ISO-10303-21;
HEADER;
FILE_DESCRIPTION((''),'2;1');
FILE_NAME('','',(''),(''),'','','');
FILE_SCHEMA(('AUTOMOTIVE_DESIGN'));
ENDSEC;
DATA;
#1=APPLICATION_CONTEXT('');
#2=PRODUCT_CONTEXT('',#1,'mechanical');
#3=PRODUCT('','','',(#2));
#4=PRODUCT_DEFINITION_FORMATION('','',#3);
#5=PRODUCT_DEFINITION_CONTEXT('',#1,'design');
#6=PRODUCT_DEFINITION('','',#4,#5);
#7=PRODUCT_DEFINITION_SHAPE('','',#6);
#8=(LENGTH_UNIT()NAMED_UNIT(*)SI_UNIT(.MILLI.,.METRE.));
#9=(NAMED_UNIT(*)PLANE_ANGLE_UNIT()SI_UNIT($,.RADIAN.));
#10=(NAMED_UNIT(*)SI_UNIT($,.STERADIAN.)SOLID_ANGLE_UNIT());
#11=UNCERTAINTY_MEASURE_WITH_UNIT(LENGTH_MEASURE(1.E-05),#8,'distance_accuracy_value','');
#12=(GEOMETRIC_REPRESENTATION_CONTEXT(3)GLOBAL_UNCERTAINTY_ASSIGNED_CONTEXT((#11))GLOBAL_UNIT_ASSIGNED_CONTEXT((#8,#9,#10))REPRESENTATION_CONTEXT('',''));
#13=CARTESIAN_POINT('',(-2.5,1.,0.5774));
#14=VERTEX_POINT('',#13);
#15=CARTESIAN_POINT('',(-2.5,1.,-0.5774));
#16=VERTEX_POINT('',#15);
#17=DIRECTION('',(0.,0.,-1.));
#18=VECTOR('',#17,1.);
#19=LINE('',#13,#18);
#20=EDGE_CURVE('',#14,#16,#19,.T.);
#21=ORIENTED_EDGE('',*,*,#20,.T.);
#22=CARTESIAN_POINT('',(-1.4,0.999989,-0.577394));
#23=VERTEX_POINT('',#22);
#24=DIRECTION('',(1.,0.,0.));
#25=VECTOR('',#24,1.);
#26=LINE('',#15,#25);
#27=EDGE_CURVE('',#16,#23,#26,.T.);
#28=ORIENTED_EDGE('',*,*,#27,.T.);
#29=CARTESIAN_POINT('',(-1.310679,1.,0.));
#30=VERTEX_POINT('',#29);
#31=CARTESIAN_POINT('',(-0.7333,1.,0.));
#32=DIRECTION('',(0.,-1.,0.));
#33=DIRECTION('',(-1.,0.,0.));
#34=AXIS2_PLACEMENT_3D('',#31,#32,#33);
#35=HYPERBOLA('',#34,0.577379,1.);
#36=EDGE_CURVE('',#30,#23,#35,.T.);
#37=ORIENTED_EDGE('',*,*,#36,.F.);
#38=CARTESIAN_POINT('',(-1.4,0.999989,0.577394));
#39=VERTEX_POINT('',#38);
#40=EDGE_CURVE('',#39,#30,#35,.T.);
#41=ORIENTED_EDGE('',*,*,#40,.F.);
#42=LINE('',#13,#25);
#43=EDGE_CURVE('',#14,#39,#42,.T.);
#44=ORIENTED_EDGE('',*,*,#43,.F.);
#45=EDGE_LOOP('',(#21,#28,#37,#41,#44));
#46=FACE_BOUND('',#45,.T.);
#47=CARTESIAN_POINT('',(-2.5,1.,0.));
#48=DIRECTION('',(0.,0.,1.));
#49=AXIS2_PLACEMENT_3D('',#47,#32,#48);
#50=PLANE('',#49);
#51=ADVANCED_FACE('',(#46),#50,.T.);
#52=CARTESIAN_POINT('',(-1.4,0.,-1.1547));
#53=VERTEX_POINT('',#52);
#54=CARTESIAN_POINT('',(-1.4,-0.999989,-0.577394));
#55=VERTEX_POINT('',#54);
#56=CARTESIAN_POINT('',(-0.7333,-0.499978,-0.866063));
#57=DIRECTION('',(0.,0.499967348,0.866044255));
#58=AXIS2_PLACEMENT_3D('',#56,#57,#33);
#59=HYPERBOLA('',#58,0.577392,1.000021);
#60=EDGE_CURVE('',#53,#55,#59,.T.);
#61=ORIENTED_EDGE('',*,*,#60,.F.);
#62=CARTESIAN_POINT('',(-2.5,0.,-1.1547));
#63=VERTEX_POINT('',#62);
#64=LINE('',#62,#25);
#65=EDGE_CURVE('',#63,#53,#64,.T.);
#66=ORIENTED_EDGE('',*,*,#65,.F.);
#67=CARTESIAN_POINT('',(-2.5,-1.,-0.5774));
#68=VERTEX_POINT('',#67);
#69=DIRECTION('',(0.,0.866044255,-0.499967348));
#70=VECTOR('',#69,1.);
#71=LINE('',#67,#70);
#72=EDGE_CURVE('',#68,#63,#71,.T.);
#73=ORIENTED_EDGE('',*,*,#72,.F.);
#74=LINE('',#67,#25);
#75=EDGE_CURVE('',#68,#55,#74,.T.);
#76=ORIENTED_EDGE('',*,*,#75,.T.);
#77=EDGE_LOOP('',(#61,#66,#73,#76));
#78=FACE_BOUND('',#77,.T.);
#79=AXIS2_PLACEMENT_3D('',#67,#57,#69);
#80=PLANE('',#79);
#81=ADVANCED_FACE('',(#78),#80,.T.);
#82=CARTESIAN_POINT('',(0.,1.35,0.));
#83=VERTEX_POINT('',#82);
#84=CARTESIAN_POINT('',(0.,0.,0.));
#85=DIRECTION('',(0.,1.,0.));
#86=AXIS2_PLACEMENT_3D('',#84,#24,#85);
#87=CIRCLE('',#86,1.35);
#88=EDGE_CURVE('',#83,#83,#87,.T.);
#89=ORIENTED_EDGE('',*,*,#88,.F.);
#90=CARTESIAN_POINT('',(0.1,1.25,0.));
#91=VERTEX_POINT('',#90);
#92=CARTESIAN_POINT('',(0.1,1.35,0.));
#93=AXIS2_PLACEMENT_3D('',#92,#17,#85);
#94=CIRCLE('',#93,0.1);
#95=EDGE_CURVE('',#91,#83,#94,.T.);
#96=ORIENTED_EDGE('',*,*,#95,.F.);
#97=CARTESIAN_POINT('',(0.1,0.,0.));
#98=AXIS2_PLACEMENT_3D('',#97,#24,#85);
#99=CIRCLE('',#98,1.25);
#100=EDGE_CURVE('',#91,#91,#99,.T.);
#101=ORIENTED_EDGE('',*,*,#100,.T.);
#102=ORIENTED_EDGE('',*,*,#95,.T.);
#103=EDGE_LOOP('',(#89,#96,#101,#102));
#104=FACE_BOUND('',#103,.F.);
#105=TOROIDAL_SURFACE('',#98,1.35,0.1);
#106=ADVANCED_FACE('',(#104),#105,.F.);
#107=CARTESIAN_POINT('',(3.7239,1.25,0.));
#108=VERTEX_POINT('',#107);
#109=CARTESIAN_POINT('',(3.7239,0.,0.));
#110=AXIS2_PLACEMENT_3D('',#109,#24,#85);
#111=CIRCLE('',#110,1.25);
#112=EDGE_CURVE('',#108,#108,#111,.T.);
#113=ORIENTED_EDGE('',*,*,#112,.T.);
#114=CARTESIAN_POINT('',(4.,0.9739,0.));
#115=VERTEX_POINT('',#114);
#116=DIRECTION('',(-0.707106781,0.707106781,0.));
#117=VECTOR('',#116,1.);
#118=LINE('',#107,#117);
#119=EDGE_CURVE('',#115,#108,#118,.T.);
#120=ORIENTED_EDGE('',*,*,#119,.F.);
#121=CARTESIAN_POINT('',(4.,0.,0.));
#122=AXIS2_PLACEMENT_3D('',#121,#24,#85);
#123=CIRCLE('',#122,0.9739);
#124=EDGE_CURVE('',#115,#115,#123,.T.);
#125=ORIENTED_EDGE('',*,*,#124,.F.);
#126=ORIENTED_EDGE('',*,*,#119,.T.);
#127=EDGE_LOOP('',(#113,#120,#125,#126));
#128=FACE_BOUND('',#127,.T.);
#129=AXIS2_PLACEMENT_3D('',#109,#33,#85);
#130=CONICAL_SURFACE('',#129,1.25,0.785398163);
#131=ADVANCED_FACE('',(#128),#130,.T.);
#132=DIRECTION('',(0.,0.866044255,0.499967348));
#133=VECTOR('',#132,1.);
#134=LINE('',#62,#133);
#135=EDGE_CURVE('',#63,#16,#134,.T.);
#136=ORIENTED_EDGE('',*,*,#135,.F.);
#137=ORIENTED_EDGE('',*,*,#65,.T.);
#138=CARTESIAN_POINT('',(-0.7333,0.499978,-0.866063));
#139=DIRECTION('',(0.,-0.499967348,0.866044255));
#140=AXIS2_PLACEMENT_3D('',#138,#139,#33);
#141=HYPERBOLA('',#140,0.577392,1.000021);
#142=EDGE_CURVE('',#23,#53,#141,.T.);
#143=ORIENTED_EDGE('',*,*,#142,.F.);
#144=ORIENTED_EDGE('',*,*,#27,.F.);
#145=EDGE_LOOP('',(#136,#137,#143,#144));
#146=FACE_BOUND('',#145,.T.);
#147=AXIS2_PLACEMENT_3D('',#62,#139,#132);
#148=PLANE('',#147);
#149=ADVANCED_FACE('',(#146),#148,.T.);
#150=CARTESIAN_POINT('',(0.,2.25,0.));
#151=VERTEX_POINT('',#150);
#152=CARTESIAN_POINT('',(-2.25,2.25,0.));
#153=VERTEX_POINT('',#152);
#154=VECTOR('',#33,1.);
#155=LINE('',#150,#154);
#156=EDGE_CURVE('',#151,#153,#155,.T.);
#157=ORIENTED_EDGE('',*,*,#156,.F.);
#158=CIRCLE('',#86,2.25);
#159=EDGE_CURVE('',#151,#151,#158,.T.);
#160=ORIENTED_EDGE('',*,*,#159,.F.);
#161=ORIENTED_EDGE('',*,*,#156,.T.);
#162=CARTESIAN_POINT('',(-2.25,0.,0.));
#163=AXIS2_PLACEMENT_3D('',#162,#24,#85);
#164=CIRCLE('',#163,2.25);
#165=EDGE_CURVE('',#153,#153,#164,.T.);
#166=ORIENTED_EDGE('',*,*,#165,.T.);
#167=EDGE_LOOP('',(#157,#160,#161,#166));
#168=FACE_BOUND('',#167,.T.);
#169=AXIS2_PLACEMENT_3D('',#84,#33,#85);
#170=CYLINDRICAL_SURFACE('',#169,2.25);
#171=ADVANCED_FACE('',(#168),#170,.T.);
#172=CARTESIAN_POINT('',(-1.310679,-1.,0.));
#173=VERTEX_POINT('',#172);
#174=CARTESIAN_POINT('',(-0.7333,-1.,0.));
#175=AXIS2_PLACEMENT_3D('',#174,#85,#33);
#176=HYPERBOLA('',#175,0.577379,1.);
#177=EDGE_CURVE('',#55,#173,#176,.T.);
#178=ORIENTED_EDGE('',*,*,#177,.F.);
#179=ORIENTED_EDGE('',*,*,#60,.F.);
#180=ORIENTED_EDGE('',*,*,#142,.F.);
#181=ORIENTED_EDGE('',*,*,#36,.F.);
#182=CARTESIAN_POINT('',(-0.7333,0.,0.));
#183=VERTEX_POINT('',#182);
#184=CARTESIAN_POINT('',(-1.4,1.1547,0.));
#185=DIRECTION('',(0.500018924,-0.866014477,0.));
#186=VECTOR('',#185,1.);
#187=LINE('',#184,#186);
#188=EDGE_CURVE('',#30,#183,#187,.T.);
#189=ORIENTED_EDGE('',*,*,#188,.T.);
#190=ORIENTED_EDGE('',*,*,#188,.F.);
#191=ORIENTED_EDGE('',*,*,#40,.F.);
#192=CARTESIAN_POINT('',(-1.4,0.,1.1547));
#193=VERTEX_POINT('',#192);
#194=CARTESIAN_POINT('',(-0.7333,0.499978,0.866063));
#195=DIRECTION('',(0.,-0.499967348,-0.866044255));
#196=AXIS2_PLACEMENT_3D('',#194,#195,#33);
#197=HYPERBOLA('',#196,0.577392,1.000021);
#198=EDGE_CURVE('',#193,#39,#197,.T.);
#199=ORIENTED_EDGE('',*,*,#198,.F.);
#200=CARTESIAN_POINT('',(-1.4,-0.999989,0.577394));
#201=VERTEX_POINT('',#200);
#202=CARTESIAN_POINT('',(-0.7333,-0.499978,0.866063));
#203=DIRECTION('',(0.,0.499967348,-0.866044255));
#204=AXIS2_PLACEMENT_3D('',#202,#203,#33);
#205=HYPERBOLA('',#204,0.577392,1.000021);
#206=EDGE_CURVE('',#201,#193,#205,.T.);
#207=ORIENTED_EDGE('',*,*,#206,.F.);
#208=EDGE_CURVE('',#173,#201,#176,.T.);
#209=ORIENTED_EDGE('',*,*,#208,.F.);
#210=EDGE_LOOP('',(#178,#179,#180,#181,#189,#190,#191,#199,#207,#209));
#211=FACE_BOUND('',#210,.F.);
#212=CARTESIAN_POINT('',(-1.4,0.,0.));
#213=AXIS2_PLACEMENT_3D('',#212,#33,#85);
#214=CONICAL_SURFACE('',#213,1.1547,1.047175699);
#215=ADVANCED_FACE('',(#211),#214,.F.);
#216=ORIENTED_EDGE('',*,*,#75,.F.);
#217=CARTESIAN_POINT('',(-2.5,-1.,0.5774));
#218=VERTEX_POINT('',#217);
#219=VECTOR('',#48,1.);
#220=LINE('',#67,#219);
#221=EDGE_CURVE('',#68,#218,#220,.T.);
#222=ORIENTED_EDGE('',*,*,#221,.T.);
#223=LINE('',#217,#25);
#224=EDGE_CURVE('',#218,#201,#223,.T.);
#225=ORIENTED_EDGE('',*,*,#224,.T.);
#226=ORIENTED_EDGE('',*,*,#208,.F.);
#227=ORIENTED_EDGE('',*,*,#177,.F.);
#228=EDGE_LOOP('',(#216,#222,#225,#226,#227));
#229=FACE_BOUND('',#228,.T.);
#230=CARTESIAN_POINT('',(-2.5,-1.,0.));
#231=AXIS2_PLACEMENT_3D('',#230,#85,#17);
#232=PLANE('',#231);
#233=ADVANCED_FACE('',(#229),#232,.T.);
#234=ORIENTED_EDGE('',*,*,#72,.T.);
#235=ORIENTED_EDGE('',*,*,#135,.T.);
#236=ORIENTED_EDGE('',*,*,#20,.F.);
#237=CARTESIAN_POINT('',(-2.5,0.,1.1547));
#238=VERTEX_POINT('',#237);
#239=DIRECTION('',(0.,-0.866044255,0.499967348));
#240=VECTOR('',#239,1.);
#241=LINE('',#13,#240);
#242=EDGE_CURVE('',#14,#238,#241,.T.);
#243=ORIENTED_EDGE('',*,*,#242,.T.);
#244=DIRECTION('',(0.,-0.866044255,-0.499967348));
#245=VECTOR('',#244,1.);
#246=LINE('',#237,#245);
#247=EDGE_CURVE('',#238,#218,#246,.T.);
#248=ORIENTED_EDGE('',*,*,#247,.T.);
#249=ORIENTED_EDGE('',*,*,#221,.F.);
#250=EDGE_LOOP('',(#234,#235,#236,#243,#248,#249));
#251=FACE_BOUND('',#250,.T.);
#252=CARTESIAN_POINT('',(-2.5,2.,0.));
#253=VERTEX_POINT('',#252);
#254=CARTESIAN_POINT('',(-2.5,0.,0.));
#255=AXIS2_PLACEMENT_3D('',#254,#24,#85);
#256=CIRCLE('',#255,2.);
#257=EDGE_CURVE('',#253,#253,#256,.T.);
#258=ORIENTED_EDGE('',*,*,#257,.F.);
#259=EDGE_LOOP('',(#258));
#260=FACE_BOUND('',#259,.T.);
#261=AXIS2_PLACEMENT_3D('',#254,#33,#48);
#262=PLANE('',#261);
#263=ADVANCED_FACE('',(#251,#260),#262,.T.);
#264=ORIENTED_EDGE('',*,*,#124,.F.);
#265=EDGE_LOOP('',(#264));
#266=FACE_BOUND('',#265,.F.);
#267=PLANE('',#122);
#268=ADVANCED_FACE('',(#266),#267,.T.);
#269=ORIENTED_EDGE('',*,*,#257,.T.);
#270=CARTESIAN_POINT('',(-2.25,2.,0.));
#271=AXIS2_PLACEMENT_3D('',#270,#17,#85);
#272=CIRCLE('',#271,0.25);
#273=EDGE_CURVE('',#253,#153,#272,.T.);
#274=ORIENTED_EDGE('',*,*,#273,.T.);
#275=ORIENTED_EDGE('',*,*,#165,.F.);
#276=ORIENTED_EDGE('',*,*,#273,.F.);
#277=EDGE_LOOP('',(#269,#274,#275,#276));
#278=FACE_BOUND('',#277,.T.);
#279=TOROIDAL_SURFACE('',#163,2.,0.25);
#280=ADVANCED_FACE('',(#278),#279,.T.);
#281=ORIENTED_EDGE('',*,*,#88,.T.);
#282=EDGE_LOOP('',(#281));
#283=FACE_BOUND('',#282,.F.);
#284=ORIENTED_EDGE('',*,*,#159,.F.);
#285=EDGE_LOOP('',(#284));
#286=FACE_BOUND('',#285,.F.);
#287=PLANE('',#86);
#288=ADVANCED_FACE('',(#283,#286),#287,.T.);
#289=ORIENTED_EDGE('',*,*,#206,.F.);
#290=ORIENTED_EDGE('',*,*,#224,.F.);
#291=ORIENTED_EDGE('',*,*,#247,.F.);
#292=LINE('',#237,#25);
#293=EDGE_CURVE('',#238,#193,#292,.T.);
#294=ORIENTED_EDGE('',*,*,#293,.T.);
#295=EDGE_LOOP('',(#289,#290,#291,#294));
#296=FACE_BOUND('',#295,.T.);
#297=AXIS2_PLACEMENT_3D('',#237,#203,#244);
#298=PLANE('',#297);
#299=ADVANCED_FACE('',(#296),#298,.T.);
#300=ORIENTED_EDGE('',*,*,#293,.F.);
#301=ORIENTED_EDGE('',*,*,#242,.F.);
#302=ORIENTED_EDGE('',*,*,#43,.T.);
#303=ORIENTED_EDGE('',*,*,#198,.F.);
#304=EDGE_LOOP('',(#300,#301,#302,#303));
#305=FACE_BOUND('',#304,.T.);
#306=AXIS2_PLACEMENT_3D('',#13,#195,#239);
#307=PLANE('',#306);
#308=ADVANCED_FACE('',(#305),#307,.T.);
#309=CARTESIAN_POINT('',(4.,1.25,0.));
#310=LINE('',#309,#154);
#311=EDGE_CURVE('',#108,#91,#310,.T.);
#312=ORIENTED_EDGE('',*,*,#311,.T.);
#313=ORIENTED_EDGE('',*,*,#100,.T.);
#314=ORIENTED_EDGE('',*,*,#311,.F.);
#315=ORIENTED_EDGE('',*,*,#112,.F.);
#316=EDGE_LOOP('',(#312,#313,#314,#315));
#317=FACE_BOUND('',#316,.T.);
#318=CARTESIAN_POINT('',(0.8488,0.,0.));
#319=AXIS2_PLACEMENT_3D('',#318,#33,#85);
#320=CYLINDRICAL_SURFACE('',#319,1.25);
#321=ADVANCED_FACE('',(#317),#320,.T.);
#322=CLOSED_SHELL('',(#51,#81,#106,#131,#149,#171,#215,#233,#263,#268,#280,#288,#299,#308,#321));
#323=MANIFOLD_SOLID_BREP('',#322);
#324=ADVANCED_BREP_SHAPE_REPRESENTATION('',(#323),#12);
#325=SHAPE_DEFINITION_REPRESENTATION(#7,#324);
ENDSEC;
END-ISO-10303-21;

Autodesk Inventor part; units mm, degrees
ref_plane "YZ Plane" through (0, 0, 0) normal (1, 0, 0) x (0, 1, 0)
ref_plane "XZ Plane" through (0, 0, 0) normal (0, 1, 0) x (-1, 0, 0)
sketch "Skizze1" plane through (0, 0, 0) normal (0, 0, 1) x (1, 0, 0)
  line L0 (-0.7333, 0) -> (4, 0)
  line L1 (4, 0) -> (4, 1.25)
  line L2 (4, 1.25) -> (1.125, 1.25)
  line L3 (1.125, 1.25) -> (0.8488, 1.25)
  line L4 (0.8488, 1.25) -> (0, 1.25)
  line L5 (0, 1.25) -> (0, 2.25)
  line L6 (0, 2.25) -> (-2.5, 2.25)
  line L7 (-2.5, 2.25) -> (-2.5, 1.1547)
  line L8 (-2.5, 1.1547) -> (-1.4, 1.1547)
  line L9 (-1.4, 1.1547) -> (-0.7333, 0)
  line L10 (-3.8, 0) -> (5.3, 0) projected
  line L11 (0, -0.45) -> (0, 2.7) projected
  line L12 (1.125, 1.25) -> (0, 1.25) construction
  dimension "d1" = 2.875
  dimension "d2" = 0.2762
  dimension "d3" = 2.5
  dimension "d4" = 1.1
  dimension "d5" = 60
  dimension "d6" = 2.5
  dimension "d7" = 2.5
  dimension "d8" = 2.3094
  dimension "d9" = 4.5
  dimension "d26" = 4
revolve "Körper" add sketch "Skizze1" angle 360 about axis through (-0.7333, 0, 0) along (1, 0, 0)
sketch "Skizze2" plane through (-2.5, 0, 0) normal (-1, 0, 0) x (0, 0, 1)
  circle A0 centre (0, 0) radius 1.1547 projected
  line L0 (0, -3.15) -> (0, 3.15) projected
  line L1 (-3.15, 0) -> (3.15, 0) projected
  line L2 (1.1547, 0) -> (0.5774, -1)
  line L3 (0.5774, -1) -> (-0.5774, -1)
  line L4 (-0.5774, -1) -> (-1.1547, 0)
  line L5 (-1.1547, 0) -> (-0.5774, 1)
  line L6 (-0.5774, 1) -> (0.5774, 1)
  line L7 (0.5774, 1) -> (1.1547, 0)
extrude "Loch" add sketch "Skizze2" against normal up to next contours L7 A0 | A0 L2 | L6 L0 A0 | A0 L0 L3 | L0 L6 A0 | A0 L3 L0 | L4 A0 | A0 L5
fillet "Rundung1" radius 0.25 1 edges at (-2.5, -2.25, 0)
thread "Gewinde" size "M2.5x0.45" class "6g" standard "ISO Metric profile" length 2.875
chamfer "Fase1" distance 0.2761 distance2 0.2761 1 edges at (4, -1.25, 0) measured on face at (4, -0.1825, -0.5629)
ref_plane "Work Plane1" through (29, 0, 0) normal (0, -1, 0) x (1, 0, 0)
fillet "Fillet2" radius 0.1 1 edges at (0, -1.25, 0)
equation "\"d30\" = R"
equation "\"d15\" = -0.5 * SPD + 0.5 * GD"
equation "\"d16\" = GUL"
equation "\"d17\" = RR"
equation "\"d13\" = GEL"
equation "\"d1\" = GEL"
equation "\"d3\" = KOH"
equation "\"d4\" = INTI"
equation "\"d6\" = GD"
equation "\"d7\" = BDM"
equation "\"d8\" = 1.1547 * SW"
equation "\"d9\" = KOD"
equation "\"d26\" = NLG"
equation "\"GD\" = NND"
equation "\"NLG\" = 4"
equation "\"GEL\" = 2.875"
equation "\"KOD\" = 4.5"
equation "\"KOH\" = 2.5"
equation "\"INTI\" = 1.1"
equation "\"GAL\" = 0.61345 * PTC"
equation "\"GUL\" = 0.61345 * PTC"
equation "\"BDM\" = NND"
equation "\"SW\" = 2"
equation "\"RR\" = 0.25"
equation "\"SPD\" = NND - 1.2269 * PTC"
equation "\"R\" = 0.1"
equation "\"TOA\" = 30deg"
equation "\"GD1\" = THREADDIA - 1.2269 * PTC"
equation "\"THREADDIA\" = 2.5"
equation "\"FAWI\" = 45deg"
equation "\"ANG\" = 120deg"
equation "\"PTC\" = 0.45"
equation "\"NND\" = 2.5"
equation "\"E0\" = 1.155 * SW"
properties part number "DIN 912 - M2,5 x 4" material "Stahl, weich"
